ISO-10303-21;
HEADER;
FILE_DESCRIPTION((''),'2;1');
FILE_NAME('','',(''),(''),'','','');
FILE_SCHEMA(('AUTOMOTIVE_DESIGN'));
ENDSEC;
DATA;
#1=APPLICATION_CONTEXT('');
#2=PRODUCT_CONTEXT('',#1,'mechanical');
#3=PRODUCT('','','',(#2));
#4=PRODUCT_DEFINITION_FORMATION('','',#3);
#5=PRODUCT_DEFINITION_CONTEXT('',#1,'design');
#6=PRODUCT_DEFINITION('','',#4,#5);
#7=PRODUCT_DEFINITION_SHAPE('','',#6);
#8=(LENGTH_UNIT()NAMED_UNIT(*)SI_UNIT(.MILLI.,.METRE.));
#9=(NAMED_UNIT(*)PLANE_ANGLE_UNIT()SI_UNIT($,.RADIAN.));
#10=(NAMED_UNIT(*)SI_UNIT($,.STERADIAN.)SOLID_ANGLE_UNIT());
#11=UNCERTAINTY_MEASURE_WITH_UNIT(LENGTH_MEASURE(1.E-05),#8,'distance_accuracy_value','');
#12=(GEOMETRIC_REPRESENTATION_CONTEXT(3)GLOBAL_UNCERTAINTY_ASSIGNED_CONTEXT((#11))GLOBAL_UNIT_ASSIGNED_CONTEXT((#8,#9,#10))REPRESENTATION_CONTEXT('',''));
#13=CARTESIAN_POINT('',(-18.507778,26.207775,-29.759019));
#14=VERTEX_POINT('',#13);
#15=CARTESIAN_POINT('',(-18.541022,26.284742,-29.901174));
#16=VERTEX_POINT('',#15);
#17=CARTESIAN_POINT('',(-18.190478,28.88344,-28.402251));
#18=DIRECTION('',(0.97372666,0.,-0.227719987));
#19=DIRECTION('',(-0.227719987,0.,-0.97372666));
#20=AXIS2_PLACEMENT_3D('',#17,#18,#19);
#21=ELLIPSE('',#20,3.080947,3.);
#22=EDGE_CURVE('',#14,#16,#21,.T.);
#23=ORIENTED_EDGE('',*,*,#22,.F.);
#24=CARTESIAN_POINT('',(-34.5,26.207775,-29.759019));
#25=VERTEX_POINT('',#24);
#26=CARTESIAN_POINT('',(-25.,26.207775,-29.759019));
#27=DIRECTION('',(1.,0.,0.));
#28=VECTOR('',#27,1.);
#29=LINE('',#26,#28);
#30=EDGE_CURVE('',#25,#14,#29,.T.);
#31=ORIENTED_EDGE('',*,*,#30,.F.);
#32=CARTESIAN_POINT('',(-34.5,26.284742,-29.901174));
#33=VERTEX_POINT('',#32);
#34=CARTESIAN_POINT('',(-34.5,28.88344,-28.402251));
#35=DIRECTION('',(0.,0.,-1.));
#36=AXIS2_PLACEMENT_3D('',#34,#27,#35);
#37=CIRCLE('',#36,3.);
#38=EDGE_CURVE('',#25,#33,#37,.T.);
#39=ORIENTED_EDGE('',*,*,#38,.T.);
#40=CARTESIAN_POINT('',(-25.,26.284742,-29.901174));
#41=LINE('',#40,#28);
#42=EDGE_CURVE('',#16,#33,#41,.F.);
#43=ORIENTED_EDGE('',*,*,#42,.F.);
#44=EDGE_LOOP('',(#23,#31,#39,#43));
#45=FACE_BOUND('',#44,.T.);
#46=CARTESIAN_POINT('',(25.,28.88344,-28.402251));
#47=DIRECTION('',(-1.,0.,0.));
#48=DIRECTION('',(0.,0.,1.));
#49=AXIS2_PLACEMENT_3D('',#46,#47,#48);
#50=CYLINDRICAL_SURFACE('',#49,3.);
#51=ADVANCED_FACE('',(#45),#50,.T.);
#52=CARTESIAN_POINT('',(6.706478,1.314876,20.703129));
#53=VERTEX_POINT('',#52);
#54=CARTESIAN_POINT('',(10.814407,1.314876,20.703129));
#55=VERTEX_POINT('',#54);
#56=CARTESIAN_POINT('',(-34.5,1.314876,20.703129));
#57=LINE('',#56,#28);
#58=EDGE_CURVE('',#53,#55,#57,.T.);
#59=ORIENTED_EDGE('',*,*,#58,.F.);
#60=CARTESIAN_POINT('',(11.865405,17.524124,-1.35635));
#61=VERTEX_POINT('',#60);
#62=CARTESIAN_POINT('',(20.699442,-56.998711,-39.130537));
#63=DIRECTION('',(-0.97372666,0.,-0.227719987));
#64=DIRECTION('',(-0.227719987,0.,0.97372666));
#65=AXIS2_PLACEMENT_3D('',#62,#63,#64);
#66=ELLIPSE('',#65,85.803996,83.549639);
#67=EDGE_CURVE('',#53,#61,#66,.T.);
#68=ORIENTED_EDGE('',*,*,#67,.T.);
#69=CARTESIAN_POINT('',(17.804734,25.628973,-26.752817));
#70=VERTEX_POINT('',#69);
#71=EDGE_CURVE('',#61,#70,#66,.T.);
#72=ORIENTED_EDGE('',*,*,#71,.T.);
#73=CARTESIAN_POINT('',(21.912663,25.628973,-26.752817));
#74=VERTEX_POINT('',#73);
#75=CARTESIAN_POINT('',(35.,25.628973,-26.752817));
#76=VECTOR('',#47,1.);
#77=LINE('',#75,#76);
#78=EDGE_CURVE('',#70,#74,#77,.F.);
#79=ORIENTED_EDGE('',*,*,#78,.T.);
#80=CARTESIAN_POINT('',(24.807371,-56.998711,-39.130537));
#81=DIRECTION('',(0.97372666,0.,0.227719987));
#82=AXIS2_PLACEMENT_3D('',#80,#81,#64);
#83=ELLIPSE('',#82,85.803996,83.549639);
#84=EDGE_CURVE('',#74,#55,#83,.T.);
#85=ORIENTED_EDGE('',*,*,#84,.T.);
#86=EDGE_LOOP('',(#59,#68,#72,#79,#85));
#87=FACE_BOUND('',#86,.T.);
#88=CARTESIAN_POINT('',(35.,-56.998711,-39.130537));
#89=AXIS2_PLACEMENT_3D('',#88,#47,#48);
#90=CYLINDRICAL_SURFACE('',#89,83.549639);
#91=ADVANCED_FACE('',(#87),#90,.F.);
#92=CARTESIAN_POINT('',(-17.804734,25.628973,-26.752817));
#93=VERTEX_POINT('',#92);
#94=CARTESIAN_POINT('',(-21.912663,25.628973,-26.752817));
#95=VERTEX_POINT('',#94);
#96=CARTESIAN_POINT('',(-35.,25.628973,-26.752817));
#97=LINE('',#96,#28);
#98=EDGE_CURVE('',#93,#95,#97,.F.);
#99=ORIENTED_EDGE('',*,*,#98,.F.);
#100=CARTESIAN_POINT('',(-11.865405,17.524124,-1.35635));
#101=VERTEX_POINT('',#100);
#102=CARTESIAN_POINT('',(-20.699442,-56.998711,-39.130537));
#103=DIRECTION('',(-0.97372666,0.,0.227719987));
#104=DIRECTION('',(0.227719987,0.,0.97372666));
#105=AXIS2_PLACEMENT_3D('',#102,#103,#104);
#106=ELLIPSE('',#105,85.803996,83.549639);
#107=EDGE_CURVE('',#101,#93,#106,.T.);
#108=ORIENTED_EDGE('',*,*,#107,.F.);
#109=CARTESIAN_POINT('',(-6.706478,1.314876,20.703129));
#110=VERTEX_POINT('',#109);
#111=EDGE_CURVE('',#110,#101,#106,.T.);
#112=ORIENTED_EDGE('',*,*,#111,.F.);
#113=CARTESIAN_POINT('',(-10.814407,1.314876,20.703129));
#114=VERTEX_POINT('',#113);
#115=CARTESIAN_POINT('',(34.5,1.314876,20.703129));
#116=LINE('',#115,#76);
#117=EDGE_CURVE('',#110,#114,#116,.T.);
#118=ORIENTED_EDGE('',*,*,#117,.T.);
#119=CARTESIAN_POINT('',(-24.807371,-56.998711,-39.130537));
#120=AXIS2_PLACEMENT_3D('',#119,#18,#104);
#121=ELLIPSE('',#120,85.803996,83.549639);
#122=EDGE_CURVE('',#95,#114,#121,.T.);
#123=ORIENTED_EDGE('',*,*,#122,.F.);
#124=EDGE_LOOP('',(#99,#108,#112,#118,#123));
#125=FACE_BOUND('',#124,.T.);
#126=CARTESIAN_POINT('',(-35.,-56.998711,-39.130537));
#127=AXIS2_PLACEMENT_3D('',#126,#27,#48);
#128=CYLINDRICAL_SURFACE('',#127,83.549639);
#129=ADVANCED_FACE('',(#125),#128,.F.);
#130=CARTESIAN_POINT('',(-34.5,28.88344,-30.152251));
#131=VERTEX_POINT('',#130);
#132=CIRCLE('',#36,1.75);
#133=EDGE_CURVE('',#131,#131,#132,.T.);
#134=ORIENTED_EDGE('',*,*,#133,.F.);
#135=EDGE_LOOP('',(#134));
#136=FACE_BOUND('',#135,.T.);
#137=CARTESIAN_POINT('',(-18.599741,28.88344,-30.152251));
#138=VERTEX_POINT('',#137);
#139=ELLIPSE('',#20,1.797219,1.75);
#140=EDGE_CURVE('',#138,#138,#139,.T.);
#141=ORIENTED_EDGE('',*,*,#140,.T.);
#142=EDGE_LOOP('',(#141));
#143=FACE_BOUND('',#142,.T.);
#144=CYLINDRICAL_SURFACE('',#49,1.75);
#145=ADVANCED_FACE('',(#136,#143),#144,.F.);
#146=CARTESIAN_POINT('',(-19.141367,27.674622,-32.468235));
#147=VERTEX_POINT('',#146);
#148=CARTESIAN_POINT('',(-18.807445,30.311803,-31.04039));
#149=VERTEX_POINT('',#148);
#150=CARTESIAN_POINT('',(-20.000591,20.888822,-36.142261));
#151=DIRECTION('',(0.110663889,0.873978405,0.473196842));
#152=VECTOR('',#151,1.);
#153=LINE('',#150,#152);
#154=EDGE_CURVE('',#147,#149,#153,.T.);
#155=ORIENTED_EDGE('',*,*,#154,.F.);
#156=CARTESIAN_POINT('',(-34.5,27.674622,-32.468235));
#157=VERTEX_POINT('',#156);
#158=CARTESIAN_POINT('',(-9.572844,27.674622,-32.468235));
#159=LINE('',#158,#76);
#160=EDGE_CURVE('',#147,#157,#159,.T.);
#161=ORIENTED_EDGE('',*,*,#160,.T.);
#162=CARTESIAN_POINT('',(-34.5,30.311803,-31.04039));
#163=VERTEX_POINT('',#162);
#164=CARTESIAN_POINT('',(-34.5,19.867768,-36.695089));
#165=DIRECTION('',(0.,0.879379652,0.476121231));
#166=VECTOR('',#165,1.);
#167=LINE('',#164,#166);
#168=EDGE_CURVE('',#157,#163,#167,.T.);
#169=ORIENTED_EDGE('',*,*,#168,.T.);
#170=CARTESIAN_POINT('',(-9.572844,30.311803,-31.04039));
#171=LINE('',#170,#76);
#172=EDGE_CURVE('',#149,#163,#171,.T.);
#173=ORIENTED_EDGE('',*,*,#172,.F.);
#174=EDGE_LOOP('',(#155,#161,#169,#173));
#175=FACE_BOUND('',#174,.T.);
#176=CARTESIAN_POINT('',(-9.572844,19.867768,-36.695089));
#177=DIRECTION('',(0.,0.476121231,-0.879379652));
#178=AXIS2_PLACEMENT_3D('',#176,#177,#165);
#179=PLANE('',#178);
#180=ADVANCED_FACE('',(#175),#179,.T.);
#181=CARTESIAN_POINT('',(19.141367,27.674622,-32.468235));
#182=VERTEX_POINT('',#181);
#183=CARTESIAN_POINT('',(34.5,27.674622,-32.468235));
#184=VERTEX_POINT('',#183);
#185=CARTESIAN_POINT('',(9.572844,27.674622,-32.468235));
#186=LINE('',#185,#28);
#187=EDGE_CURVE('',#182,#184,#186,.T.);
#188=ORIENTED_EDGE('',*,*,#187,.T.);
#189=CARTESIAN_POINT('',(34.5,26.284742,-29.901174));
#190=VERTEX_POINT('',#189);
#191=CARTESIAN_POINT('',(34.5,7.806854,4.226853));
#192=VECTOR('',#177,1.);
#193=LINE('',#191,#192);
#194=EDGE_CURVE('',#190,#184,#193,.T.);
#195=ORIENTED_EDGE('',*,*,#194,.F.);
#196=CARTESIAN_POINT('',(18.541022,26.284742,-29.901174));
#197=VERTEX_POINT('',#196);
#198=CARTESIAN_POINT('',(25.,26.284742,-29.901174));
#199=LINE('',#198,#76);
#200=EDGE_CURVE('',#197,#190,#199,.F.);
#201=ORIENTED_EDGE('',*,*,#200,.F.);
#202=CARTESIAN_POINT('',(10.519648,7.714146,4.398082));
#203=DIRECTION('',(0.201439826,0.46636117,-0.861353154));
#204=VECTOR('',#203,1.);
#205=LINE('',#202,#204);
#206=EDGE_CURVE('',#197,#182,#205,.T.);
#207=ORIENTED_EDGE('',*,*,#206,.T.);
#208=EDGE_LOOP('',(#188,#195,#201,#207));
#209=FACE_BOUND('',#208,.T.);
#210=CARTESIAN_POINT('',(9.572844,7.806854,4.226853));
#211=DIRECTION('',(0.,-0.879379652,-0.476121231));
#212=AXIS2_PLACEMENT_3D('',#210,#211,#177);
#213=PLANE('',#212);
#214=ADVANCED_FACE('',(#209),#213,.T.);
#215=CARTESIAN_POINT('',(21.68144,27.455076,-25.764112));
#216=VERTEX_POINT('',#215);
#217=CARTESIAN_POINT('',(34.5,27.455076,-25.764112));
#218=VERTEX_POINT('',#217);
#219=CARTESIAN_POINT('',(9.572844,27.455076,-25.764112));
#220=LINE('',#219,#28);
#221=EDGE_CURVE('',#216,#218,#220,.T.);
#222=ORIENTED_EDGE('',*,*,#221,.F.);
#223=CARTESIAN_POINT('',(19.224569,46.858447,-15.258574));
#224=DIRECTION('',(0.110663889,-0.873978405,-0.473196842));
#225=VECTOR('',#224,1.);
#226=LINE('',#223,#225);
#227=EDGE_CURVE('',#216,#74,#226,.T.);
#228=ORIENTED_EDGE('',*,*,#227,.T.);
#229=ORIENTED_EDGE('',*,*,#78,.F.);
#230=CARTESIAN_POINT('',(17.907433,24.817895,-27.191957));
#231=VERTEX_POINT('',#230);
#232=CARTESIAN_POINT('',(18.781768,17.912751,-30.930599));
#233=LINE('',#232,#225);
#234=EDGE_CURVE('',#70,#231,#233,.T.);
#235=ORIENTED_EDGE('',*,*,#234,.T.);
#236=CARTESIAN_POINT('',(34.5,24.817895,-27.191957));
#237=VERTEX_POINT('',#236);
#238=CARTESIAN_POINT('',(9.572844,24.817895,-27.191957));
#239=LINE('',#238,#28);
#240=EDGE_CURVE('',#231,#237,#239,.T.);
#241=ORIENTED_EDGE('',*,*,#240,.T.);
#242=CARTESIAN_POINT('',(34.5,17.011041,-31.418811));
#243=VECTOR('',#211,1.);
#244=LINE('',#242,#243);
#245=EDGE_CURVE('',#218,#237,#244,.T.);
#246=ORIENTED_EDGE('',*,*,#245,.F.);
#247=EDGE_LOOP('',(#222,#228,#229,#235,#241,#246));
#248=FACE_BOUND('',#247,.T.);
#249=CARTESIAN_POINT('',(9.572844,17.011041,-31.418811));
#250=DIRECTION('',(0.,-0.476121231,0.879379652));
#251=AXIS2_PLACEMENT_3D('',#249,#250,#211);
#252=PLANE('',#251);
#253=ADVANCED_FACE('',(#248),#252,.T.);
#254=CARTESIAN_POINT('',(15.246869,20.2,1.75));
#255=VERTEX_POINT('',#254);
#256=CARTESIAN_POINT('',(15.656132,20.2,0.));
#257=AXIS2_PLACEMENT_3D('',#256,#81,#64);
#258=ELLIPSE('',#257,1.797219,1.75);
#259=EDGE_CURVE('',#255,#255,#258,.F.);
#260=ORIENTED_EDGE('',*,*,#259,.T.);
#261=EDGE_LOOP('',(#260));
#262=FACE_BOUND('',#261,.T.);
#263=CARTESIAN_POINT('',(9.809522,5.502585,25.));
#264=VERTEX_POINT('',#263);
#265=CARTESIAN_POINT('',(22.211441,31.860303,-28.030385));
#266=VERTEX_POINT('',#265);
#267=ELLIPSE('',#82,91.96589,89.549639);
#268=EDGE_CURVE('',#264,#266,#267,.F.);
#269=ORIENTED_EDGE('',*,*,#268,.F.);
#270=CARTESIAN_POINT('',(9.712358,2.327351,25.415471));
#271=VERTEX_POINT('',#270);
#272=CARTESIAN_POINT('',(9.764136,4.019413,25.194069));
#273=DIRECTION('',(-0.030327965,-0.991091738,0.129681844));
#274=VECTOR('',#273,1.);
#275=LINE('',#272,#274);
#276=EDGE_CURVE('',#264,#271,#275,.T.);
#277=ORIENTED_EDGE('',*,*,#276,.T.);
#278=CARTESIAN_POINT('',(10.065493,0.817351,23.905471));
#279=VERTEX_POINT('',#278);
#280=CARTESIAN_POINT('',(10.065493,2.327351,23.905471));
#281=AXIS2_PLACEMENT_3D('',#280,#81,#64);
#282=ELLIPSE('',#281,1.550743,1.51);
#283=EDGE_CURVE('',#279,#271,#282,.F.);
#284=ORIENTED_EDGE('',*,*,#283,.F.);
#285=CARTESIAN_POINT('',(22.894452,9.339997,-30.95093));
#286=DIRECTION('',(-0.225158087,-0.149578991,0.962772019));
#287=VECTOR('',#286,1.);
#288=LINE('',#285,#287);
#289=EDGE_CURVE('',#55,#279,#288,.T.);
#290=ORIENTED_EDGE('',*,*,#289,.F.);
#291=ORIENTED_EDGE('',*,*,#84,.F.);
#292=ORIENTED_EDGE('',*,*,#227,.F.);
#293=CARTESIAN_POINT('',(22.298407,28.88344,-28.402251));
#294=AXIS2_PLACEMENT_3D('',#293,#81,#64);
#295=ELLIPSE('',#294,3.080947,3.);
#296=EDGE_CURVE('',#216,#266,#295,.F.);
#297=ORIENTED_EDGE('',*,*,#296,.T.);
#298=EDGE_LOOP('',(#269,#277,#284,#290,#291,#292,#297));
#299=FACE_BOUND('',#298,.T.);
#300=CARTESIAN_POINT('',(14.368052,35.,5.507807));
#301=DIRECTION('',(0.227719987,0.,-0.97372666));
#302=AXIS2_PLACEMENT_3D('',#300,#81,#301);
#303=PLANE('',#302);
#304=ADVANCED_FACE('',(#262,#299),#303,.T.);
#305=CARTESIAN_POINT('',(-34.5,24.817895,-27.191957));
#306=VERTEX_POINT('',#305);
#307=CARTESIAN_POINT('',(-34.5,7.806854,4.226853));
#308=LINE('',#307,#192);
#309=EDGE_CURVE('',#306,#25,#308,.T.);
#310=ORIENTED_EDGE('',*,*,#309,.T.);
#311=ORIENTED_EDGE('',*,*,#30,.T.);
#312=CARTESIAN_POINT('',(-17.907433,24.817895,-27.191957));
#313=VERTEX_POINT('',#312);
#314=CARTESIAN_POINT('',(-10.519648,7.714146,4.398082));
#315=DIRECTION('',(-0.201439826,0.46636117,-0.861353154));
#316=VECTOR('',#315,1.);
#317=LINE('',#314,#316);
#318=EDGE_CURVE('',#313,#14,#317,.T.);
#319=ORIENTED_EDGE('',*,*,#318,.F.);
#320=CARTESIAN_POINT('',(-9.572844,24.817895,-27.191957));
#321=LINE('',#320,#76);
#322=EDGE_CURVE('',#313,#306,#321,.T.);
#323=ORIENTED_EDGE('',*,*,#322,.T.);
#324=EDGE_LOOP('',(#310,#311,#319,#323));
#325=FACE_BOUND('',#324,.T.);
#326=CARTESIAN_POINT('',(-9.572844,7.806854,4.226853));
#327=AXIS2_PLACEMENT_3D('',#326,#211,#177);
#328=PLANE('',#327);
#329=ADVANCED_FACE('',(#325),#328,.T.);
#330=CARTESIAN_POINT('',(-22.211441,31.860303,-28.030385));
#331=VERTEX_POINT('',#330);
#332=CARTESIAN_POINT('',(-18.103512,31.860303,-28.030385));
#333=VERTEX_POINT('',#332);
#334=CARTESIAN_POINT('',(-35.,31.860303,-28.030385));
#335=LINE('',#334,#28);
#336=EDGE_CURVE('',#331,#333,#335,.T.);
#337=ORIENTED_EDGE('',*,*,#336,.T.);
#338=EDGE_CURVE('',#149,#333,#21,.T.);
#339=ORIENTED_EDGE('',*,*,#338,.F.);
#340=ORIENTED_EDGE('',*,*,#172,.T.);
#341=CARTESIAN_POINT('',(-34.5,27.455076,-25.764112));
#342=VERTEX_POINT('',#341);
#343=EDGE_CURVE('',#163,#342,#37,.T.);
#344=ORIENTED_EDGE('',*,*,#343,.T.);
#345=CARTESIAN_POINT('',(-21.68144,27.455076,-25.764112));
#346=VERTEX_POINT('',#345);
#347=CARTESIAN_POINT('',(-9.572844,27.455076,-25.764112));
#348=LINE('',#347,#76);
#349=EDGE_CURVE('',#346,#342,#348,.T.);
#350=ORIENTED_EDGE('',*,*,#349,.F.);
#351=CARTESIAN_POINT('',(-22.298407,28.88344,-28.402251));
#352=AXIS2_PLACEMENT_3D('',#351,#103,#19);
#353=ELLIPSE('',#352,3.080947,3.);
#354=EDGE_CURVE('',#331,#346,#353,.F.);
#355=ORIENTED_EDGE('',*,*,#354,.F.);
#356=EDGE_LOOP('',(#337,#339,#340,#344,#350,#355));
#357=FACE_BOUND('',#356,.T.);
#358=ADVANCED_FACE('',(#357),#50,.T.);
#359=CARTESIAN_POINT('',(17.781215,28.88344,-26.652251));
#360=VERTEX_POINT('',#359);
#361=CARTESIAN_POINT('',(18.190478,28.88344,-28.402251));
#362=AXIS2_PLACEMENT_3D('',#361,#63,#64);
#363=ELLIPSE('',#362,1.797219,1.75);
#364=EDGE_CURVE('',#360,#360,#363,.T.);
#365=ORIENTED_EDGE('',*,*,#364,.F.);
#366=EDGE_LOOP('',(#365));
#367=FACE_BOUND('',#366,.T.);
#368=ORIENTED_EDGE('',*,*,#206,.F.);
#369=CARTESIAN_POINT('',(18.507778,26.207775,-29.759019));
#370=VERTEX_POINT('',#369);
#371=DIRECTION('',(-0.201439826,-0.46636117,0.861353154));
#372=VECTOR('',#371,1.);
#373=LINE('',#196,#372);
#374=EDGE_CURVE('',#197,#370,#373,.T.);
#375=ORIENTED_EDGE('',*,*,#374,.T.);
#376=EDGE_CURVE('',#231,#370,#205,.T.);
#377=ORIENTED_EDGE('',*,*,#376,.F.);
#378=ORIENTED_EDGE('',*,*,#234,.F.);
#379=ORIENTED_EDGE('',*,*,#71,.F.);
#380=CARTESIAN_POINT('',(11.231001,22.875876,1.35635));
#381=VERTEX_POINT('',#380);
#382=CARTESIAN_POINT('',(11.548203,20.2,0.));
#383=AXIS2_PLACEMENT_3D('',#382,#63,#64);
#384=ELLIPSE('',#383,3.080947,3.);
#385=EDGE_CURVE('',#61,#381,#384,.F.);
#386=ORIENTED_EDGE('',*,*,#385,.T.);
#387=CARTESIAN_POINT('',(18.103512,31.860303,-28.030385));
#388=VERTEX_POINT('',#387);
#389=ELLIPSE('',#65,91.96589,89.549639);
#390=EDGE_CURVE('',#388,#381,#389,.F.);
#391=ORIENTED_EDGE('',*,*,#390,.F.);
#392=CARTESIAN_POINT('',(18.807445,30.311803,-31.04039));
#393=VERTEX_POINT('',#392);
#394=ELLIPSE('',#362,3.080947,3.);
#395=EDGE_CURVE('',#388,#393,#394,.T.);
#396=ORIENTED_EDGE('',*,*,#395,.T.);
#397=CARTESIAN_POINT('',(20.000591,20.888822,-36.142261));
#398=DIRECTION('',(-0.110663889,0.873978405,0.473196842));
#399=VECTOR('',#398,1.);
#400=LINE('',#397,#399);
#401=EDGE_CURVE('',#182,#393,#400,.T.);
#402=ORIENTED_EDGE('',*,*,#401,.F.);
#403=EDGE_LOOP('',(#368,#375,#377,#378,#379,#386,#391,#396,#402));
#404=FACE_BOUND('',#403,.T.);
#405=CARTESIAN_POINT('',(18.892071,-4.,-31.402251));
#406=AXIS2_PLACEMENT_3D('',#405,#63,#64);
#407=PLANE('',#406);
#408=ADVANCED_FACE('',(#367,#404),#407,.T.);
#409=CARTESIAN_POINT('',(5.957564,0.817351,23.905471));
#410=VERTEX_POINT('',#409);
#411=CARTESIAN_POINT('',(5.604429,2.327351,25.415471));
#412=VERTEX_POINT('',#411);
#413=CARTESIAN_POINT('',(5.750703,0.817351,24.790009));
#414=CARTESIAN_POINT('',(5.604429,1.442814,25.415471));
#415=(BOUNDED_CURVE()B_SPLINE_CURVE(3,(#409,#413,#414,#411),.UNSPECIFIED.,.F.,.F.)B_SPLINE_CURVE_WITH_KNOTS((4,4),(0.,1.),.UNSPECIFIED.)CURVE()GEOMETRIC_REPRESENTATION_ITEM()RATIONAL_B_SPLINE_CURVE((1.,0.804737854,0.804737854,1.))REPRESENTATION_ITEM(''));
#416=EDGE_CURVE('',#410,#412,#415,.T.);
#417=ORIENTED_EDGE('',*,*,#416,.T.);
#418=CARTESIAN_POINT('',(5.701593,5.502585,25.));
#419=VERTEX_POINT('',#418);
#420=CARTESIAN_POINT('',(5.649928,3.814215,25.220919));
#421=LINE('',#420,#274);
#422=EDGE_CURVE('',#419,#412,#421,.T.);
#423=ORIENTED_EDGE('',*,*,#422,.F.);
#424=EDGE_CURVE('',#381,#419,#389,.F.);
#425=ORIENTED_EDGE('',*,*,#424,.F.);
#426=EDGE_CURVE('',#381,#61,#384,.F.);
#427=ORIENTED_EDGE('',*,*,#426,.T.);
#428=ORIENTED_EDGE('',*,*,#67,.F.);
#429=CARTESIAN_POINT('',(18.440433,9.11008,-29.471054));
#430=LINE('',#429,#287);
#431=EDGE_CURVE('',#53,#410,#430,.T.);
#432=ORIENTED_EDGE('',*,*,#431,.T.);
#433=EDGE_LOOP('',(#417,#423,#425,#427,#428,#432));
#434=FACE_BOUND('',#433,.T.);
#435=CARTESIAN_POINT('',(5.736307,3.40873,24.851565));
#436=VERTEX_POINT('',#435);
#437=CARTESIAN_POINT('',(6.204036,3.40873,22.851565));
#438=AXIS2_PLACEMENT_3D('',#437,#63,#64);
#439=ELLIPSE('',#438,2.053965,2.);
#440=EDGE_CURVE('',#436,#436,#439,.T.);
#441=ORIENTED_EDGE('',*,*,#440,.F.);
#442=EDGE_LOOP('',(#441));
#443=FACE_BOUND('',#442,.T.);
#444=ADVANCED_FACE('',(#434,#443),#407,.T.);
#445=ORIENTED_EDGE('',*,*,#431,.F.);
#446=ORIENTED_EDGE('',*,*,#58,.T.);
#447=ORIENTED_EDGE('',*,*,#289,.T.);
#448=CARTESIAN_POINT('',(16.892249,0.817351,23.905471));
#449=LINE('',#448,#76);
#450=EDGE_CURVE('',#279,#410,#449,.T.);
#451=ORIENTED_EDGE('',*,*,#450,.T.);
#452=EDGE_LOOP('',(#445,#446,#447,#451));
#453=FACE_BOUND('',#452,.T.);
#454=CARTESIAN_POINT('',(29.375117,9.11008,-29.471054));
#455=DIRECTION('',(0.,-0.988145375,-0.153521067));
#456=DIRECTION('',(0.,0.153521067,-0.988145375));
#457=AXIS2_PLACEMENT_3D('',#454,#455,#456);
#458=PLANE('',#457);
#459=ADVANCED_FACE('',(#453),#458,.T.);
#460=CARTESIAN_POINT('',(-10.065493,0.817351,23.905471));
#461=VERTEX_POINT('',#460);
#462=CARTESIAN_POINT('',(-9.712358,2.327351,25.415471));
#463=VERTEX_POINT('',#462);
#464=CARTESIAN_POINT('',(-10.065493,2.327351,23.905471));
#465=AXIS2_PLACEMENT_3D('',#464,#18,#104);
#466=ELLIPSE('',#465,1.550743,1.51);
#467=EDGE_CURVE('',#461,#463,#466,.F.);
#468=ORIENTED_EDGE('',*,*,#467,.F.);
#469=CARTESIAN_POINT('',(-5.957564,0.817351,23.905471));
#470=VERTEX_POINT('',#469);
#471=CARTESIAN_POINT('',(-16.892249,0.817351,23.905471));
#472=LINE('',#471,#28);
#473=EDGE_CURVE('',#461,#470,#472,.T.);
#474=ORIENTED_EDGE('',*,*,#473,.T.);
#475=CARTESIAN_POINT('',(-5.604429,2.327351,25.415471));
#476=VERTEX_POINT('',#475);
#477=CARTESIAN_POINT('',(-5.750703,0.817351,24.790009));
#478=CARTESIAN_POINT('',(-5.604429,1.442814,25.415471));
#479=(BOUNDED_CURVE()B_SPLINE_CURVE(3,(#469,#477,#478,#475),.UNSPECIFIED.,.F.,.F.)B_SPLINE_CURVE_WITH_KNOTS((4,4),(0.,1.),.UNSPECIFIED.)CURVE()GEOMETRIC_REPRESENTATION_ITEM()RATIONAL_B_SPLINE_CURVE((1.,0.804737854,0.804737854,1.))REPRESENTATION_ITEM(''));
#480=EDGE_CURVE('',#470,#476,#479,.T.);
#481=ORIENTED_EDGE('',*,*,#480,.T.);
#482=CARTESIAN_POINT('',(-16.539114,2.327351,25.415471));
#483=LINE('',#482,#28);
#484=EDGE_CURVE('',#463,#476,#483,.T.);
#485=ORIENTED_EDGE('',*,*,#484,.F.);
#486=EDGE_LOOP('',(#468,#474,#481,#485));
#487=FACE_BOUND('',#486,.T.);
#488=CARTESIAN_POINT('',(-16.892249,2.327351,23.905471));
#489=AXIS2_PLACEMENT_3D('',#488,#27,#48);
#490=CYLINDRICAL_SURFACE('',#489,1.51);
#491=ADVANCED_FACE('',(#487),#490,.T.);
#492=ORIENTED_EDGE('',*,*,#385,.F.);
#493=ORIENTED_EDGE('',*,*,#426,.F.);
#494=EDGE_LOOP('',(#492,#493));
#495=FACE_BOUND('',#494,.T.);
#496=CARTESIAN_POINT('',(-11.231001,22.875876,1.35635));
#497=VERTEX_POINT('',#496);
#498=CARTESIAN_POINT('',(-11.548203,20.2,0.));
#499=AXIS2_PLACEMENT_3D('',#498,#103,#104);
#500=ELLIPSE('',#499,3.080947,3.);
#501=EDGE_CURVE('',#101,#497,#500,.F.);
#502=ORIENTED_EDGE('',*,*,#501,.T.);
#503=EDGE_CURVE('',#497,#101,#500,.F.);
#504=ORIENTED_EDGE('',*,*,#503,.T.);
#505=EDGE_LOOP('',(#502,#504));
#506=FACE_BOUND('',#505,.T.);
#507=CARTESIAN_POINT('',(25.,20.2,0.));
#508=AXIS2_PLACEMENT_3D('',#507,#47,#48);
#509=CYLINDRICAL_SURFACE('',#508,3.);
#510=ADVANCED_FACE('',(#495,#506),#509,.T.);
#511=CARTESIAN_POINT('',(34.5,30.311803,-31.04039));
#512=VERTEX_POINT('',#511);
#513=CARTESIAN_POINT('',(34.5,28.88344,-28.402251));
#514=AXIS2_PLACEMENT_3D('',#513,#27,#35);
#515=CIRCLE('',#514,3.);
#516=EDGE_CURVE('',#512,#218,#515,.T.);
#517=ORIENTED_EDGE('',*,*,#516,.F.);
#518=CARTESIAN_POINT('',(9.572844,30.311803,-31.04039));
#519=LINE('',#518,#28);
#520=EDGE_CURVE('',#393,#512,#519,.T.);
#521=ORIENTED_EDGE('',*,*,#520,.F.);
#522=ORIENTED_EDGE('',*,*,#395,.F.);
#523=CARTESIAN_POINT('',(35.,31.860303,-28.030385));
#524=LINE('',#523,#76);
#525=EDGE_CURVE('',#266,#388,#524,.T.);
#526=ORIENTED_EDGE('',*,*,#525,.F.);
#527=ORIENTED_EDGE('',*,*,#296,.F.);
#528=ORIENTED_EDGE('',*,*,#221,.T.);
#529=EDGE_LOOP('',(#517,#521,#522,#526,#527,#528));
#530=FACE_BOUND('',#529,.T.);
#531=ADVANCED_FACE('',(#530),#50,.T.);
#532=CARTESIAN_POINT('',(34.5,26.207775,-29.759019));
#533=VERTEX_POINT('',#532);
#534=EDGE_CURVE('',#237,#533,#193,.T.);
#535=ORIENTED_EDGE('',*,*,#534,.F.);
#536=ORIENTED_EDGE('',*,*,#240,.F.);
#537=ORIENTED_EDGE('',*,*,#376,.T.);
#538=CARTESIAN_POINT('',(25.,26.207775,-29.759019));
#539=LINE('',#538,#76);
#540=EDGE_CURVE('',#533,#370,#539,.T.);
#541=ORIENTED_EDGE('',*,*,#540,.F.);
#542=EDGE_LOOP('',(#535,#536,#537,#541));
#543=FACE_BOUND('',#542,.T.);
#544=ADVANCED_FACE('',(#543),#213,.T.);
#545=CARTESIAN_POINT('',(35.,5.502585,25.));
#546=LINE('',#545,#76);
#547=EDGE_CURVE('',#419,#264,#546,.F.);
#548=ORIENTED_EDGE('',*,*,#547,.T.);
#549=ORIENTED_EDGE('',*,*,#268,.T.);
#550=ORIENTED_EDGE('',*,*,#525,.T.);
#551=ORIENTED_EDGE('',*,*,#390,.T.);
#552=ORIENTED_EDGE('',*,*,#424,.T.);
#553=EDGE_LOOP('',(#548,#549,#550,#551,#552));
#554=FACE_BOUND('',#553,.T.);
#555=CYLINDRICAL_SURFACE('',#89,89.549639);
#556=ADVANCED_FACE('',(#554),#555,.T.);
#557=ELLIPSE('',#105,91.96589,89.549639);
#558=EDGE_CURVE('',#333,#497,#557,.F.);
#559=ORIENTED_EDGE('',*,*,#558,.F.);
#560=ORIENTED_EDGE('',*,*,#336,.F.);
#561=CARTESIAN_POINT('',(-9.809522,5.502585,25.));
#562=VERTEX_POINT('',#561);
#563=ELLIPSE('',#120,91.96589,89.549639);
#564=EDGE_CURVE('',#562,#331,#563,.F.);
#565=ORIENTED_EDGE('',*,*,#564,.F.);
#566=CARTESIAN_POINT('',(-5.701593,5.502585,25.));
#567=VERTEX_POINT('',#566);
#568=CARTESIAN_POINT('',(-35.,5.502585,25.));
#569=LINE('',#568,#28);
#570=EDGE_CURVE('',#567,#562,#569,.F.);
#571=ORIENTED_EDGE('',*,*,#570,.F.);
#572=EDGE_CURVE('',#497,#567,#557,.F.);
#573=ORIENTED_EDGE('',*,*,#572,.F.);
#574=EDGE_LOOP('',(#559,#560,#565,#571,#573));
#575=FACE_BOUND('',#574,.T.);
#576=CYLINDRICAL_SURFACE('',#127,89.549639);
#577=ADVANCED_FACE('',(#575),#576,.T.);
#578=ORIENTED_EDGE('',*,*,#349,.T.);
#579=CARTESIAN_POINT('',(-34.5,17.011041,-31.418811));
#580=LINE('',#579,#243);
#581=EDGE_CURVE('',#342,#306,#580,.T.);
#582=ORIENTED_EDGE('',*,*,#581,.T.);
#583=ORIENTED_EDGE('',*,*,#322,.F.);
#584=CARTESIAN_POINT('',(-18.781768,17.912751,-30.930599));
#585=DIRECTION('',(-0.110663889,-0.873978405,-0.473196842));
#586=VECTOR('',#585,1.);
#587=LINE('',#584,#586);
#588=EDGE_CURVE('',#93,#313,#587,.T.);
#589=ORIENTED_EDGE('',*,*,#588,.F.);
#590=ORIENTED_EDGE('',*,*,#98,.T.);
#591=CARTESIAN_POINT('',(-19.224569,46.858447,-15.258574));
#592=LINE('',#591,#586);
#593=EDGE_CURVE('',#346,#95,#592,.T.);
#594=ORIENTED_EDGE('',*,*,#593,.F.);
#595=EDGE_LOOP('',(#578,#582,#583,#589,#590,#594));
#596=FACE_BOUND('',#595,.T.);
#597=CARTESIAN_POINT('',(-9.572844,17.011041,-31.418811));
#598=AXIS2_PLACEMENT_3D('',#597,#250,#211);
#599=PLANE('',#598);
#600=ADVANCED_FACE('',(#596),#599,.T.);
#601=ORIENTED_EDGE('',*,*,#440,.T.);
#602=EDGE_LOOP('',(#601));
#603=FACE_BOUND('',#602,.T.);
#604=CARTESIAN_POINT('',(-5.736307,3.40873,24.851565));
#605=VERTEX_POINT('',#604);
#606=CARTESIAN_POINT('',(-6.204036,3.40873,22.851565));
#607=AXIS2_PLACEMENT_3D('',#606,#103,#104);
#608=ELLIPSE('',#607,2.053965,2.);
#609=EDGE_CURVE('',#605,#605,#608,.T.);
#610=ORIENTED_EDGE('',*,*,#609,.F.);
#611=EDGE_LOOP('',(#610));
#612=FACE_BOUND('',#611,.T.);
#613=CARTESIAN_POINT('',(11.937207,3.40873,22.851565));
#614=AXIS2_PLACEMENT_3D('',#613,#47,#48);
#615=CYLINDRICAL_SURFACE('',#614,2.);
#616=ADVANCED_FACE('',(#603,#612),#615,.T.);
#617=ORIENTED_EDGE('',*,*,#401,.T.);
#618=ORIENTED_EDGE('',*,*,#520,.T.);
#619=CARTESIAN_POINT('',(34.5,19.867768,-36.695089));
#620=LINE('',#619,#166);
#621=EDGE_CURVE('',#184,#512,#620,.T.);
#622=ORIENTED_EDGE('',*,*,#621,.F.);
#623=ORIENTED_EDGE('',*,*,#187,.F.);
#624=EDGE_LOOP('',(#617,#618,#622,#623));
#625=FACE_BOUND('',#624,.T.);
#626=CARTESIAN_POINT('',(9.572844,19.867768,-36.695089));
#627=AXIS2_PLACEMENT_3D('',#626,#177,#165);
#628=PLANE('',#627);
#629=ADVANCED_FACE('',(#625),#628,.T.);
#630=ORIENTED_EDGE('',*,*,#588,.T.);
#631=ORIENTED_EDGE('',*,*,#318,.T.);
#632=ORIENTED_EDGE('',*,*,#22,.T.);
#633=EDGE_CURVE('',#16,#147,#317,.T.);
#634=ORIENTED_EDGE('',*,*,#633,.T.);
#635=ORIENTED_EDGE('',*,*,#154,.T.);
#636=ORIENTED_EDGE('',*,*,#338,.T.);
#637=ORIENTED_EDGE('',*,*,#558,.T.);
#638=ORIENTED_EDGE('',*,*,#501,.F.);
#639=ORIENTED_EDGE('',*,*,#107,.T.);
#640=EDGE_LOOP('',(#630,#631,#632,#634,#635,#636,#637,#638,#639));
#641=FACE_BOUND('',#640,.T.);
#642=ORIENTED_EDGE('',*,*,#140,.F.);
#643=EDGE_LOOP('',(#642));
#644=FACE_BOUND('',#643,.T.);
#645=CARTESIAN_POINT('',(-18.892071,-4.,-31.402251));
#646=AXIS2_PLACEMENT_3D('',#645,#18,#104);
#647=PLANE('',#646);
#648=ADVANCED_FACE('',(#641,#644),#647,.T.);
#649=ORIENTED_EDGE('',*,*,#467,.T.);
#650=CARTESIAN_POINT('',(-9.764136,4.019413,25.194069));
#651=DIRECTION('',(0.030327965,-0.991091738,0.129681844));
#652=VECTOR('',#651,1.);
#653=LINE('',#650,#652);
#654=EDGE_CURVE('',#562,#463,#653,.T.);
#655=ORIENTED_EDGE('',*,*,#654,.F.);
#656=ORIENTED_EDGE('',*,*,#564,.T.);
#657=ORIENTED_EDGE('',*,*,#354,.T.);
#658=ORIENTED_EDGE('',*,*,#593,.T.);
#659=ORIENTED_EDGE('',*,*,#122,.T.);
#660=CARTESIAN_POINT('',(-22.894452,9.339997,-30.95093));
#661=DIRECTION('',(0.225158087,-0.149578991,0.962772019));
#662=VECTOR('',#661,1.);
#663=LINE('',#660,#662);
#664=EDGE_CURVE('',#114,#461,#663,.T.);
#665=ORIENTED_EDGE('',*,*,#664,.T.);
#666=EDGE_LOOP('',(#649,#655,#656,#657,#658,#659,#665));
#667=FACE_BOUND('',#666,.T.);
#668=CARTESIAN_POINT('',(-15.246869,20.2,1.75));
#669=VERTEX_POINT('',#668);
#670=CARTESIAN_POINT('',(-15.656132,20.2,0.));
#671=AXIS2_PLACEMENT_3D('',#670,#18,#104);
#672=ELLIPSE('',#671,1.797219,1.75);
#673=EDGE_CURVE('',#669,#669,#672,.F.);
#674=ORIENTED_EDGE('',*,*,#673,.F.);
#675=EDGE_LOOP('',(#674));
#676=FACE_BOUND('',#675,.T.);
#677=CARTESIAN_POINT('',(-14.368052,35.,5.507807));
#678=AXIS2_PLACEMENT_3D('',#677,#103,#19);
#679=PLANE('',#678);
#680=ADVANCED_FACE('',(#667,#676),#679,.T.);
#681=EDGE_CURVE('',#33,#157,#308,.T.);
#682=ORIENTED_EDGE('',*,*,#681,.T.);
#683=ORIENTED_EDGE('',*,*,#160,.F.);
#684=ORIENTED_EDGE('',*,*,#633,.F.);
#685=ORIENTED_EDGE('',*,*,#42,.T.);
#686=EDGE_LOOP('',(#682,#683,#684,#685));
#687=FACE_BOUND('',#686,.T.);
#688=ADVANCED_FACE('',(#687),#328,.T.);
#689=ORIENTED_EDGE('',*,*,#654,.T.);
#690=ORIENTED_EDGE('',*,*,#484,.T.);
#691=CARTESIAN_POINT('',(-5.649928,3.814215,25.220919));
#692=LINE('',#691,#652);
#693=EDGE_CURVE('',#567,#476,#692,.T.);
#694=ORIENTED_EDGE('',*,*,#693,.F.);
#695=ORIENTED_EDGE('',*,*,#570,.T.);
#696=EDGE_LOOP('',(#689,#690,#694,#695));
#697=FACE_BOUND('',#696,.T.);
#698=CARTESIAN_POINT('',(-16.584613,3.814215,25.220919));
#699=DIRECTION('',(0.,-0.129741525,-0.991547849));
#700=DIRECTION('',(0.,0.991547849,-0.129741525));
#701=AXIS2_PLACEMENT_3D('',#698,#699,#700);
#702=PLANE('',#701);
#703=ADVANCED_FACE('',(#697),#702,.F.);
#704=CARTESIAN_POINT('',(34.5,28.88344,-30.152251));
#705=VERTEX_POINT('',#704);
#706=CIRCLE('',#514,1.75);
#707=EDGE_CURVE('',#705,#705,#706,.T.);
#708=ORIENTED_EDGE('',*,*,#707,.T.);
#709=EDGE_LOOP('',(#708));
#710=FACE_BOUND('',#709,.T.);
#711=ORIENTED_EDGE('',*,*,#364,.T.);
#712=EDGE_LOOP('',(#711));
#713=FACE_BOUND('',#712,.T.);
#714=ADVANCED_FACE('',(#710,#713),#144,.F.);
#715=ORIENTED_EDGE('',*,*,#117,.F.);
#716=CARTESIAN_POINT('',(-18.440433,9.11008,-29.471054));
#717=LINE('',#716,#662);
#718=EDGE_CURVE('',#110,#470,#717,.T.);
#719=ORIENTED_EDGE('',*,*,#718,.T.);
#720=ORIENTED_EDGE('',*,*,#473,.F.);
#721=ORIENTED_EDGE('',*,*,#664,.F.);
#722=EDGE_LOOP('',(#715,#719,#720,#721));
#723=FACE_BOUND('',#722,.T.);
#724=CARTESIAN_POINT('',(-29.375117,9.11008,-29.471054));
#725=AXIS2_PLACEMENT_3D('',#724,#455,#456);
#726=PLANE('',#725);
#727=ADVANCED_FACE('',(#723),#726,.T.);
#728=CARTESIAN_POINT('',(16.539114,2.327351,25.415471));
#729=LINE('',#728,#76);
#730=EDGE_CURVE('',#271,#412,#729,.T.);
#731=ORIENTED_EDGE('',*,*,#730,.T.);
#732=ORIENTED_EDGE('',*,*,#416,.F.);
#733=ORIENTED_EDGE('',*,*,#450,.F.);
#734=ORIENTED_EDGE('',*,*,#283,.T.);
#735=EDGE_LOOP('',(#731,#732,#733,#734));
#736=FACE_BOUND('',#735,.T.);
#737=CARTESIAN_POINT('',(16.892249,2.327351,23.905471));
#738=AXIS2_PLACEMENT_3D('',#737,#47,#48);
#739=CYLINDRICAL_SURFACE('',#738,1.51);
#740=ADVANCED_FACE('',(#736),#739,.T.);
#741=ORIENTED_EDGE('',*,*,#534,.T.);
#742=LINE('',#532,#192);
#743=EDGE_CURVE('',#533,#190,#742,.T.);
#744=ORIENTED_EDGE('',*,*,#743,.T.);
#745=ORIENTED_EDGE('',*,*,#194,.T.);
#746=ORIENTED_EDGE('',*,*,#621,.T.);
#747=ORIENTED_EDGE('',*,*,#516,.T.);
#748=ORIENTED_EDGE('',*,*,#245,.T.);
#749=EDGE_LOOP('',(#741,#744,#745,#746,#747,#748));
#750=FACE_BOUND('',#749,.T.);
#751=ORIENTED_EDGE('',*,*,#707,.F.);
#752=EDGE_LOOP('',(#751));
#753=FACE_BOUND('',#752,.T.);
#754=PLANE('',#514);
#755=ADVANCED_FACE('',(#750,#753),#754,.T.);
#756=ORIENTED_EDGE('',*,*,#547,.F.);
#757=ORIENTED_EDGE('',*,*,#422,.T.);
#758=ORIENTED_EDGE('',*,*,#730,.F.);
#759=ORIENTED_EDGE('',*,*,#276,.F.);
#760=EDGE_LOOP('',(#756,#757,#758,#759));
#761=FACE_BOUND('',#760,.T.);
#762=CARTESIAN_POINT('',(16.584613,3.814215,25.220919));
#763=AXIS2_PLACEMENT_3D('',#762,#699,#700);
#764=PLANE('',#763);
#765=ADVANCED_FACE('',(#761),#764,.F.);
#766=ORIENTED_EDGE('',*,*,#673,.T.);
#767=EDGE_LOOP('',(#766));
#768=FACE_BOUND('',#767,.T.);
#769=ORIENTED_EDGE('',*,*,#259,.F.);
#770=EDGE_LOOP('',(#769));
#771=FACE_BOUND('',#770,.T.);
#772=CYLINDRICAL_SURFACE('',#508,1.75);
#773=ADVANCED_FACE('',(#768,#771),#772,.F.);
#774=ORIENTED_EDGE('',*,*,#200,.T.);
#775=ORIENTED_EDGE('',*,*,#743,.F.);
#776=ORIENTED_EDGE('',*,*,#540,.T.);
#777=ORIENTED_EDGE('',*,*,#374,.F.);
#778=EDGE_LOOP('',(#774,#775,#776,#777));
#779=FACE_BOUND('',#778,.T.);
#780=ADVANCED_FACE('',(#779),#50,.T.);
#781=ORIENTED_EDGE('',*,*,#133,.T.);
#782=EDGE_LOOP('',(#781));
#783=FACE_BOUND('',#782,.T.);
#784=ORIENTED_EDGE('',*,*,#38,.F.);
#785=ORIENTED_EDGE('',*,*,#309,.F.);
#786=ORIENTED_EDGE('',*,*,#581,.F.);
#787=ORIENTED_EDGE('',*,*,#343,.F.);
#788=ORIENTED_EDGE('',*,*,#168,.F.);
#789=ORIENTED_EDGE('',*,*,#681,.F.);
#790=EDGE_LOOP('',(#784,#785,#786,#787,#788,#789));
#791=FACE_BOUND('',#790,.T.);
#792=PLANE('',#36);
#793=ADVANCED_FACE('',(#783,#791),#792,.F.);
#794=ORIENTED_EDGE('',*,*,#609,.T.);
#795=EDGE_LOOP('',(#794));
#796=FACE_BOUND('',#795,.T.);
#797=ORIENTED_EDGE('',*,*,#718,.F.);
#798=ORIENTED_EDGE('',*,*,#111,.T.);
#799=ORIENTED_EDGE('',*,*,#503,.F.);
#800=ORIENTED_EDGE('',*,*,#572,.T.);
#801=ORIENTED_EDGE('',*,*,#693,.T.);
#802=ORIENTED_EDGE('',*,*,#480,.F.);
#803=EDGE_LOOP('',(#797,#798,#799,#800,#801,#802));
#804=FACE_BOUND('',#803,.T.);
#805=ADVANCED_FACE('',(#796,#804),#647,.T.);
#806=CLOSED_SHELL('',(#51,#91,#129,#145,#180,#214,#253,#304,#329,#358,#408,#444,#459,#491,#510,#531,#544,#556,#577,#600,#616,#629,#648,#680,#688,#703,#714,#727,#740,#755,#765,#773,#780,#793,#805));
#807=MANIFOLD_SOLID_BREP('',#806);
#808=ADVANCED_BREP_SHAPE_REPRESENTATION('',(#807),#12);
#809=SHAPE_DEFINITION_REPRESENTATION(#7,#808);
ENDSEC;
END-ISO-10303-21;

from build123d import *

# Parameters (mm, degrees)
CROQUIS3_R                        = 3
CROQUIS3_R_2                      = 1.75
SALIENTE_EXTRUIR1_DEPTH           = 25
SALIENTE_EXTRUIR1_2_DEPTH         = 25
SALIENTE_EXTRUIR2_DEPTH           = 5
CROQUIS6_R                        = 3
SALIENTE_EXTRUIR3_DEPTH           = 10
CROQUIS7_R                        = 1.75
CORTAR_EXTRUIR1_DEPTH             = 10
SALIENTE_EXTRUIR4_DEPTH           = 35
SALIENTE_EXTRUIR4_DEPTH_BACK      = 4
CORTAR_EXTRUIR2_DEPTH             = 35
CORTAR_EXTRUIR3_DEPTH             = 35
CROQUIS11_R                       = 1.75
CORTAR_EXTRUIR4_DEPTH             = 75.850885973
CHAFL_N1_SIZE                     = 2
REDONDEO2_START                   = -5.0000001
REDONDEO2_DEPTH                   = 10.0000002
CROQUIS15_R                       = 3
CROQUIS15_R_2                     = 1.75
SALIENTE_EXTRUIR7_DEPTH           = 34.5
CORTAR_EXTRUIR6_DEPTH             = 75.850885889
CROQUIS17_W                       = 58.035388513
CROQUIS17_H                       = 46.523798752
CORTAR_EXTRUIR7_DEPTH             = 89.512139195
CROQUIS18_W                       = 44.423903472
CROQUIS18_H                       = 36.103655843
CORTAR_EXTRUIR8_DEPTH             = 69.319773447
CORTAR_EXTRUIR9_REACH             = 58.506
CROQUIS19_W                       = 12.504575714
CROQUIS19_H                       = 15.8167713
CORTAR_EXTRUIR9_DIRECTION_2_REACH = 58.506
CORTAR_EXTRUIR10_DEPTH            = 57.505797104
CORTAR_EXTRUIR10_DEPTH_BACK       = 57.505797104
SALIENTE_EXTRUIR8_START           = 5.604429129
SALIENTE_EXTRUIR8_DEPTH           = 5.209978082
SALIENTE_EXTRUIR8_START_2         = 9
SALIENTE_EXTRUIR8_2_OUTLINE_W     = 8
SALIENTE_EXTRUIR8_2_OUTLINE_H     = 9
SALIENTE_EXTRUIR8_2_DEPTH         = 2.244792929
SALIENTE_EXTRUIR8_START_3         = 15.244792929
SALIENTE_EXTRUIR8_3_OUTLINE_W     = 8
SALIENTE_EXTRUIR8_3_OUTLINE_H     = 9
SALIENTE_EXTRUIR8_3_DEPTH         = 1.755207071
SALIENTE_EXTRUIR9_REACH           = 58.506
CROQUIS27_R                       = 2
SALIENTE_EXTRUIR10_REACH          = 84.241


with BuildPart() as part:
    # Croquis3 → Saliente-Extruir1 (new body)
    with BuildSketch(Plane(origin=(0, 0, 0), x_dir=(0, 0, -1), z_dir=(1, 0, 0))):
        with Locations((0, 20.2)):
            Circle(CROQUIS3_R)
        with Locations((0, 20.2)):
            Circle(CROQUIS3_R_2, mode=Mode.SUBTRACT)
    extrude(amount=SALIENTE_EXTRUIR1_DEPTH)


with BuildPart() as body_2:
    # Croquis3 → Saliente-Extruir1 2 (new body)
    with BuildSketch(Plane(origin=(0, 0, 0), x_dir=(0, 0, -1), z_dir=(1, 0, 0))):
        with Locations((28.402251252, 28.88343963)):
            Circle(CROQUIS3_R)
        with Locations((28.402251252, 28.88343963)):
            Circle(CROQUIS3_R_2, mode=Mode.SUBTRACT)
    extrude(amount=SALIENTE_EXTRUIR1_2_DEPTH)


with BuildPart() as body_3:
    # Croquis5 → Saliente-Extruir2 (new, symmetric)
    with BuildSketch(Plane(origin=(0, 0, 0), x_dir=(1, 0, 0), z_dir=(0, 1, 0))):
        with BuildLine():
            Line((0, -26), (0, -30))
            add(Edge.make_bspline(
                [(0, -30), (3.306526268, -30), (16.53263134, -29.831217065), (35.997648536, -28.565345051), (52.057120801, -26.333176426), (58.766277483, -25.109762555), (60, -24.873829164)],
                knots=[4.71238898, 4.71238898, 4.71238898, 4.71238898, 4.810563751, 5.105088062, 5.301437603, 5.346535107, 5.346535107, 5.346535107, 5.346535107], degree=3))
            Line((60, -24.873829164), (60, -20.8))
            add(Edge.make_bspline(
                [(0, -26), (33.333333333, -26), (60, -20.8)],
                knots=[4.71238898, 4.71238898, 4.71238898, 5.355890089, 5.355890089, 5.355890089], degree=2, weights=[1, 0.948683298, 1]))
        make_face()
    extrude(amount=SALIENTE_EXTRUIR2_DEPTH, both=True)

    # Croquis6 → Saliente-Extruir3 (add)
    with BuildSketch(Plane.XY.offset(26)):
        with Locations((38, 0)):
            Circle(CROQUIS6_R)
    extrude(amount=-SALIENTE_EXTRUIR3_DEPTH)

    # Croquis7 → Cortar-Extruir1 (cut)
    with BuildSketch(Plane(origin=(0, 0, 16), x_dir=(-1, 0, 0), z_dir=(0, 0, -1))):
        with Locations((-38, 0)):
            Circle(CROQUIS7_R)
    extrude(amount=-CORTAR_EXTRUIR1_DEPTH, mode=Mode.SUBTRACT)


with BuildPart() as body_4:
    # Croquis8 → Saliente-Extruir4 (new, two sides: drawn at the far end of the back side and taken through both)
    with BuildSketch(Plane(origin=(0, 0, 0), x_dir=(1, 0, 0), z_dir=(0, 1, 0)).offset(-SALIENTE_EXTRUIR4_DEPTH_BACK)):
        Polygon((18.892070983, 31.402251252), (5, -28), (9.107929017, -28), (23, 31.402251252), align=None)
    extrude(amount=SALIENTE_EXTRUIR4_DEPTH + SALIENTE_EXTRUIR4_DEPTH_BACK)

    # Croquis9 → Cortar-Extruir2 (cut)
    with BuildSketch(Plane(origin=(0, 0, 0), x_dir=(0, 0, -1), z_dir=(1, 0, 0))):
        with BuildLine():
            ThreePointArc((23.072173604, 71.551815183), (-21.61922461, 57.42408075), (-58.358460899, 28.318368742))
            ThreePointArc((-58.358460899, 28.318368742), (-54.318368742, -32.358460899), (6.358460899, -28.318368742))
            ThreePointArc((6.358460899, -28.318368742), (18.708788399, -18.534140443), (33.7323289, -13.784935922))
            ThreePointArc((33.7323289, -13.784935922), (71.070626804, 34.213517278), (23.072173604, 71.551815183))
        make_face()
        with BuildLine():
            ThreePointArc((28.03038537, 31.860303041), (-2.862009257, 22.094675544), (-28.257567039, 1.975700145))
            ThreePointArc((-28.257567039, 1.975700145), (-27.975700145, -2.257567039), (-23.742432961, -1.975700145))
            ThreePointArc((-23.742432961, -1.975700145), (-0.048426954, 16.795264763), (28.774117135, 25.90657622))
            ThreePointArc((28.774117135, 25.90657622), (31.379114663, 29.255305513), (28.03038537, 31.860303041))
        make_face(mode=Mode.SUBTRACT)
    extrude(amount=CORTAR_EXTRUIR2_DEPTH, mode=Mode.SUBTRACT)


with BuildPart() as cortar_extruir3_tool:
    # Croquis10 → Cortar-Extruir3 (new body)
    with BuildSketch(Plane(origin=(0, 0, 0), x_dir=(1, 0, 0), z_dir=(0, 1, 0))):
        Polygon((14.368051869, -5.50780718), (23.738120218, 34.558440326), (28.571984955, 34.558440326), (28.571984955, -5.50780718), align=None)
    extrude(amount=CORTAR_EXTRUIR3_DEPTH)


with BuildPart() as part_1:
    add(part.part)

    # Cortar-Extruir3: cut by cortar_extruir3_tool
    add(cortar_extruir3_tool.part, mode=Mode.SUBTRACT)


with BuildPart() as body_2_1:
    add(body_2.part)

    # Cortar-Extruir3: cut by cortar_extruir3_tool
    add(cortar_extruir3_tool.part, mode=Mode.SUBTRACT)

    # Combinar1: union body 4, part, body 3
    add(body_4.part)
    add(part_1.part)
    add(body_3.part)

    # Croquis11 → Cortar-Extruir4 (cut, through all)
    with BuildSketch(Plane(origin=(0, 0, 0), x_dir=(0, 0, -1), z_dir=(1, 0, 0))):
        with Locations(Location((28.402251252, 28.88343963, 0), (0, 0, 180))):
            Circle(CROQUIS11_R)
        with Locations(Location((0, 20.2, 0), (0, 0, 180))):
            Circle(CROQUIS11_R)
    extrude(amount=CORTAR_EXTRUIR4_DEPTH, mode=Mode.SUBTRACT)

    # Chaflán1
    chafl_n1_edges = [body_2_1.edges().sort_by_distance(p)[0] for p in [
        (60, -5, 22.836914582),
        (60, 5, 22.836914582),
        (30.12007931, -5, 28.805559056),
        (30.12007931, 5, 28.805559056),
    ]]
    chamfer(chafl_n1_edges, length=CHAFL_N1_SIZE)

    # Redondeo2: read off the stored shape, not the designer's step
    # Redondeo2 outline → Redondeo2 (cut)
    with BuildSketch(Plane(origin=(0, 0, 0), x_dir=(1, 0, 0), z_dir=(0, 1, 0)).offset(REDONDEO2_START)):
        with BuildLine():
            Line((60, -24.873829164), (60, -22.378802425))
            ThreePointArc((60, -22.378802425), (59.301153244, -24.303560526), (57.530204169, -25.331577991))
            add(Edge.make_bspline(
                [(57.530204169, -25.331577991), (58.36173126, -25.182267919), (59.185100773, -25.029668046), (60, -24.873829164)],
                knots=[5.316747273, 5.316747273, 5.316747273, 5.316747273, 5.346535107, 5.346535107, 5.346535107, 5.346535107], degree=3))
        make_face()
    extrude(amount=REDONDEO2_DEPTH, mode=Mode.SUBTRACT)

    # Simetría1: body 2 across plane


with BuildPart() as body_2_2:
    add(body_2_1.part)
    add(body_2_1.part.mirror(Plane(origin=(0, 0, 0), x_dir=(0, 0, 1), z_dir=(1, 0, 0))))

    # Croquis15 → Saliente-Extruir7 (add, symmetric)
    with BuildSketch(Plane(origin=(0, 0, 0), x_dir=(0, 0, -1), z_dir=(1, 0, 0))):
        with Locations((28.402251252, 28.88343963)):
            Circle(CROQUIS15_R)
        with Locations((28.402251252, 28.88343963)):
            Circle(CROQUIS15_R_2, mode=Mode.SUBTRACT)
    extrude(amount=SALIENTE_EXTRUIR7_DEPTH, both=True)

    # Croquis16 → Cortar-Extruir6 (cut, through all)
    with BuildSketch(Plane(origin=(0, 0, 0), x_dir=(1, 0, 0), z_dir=(0, 1, 0))):
        Polygon((-16.885477313, 22.822092006), (-19.378773918, 33.483384445), (19.378773918, 33.483384445), (16.885477313, 22.822092006), align=None)
    extrude(amount=CORTAR_EXTRUIR6_DEPTH, mode=Mode.SUBTRACT)

    # Croquis17 → Cortar-Extruir7 (cut, through all)
    with BuildSketch(Plane(origin=(14.844261295, 0, 3.471544045), x_dir=(0.2277199868274214, 0, -0.9737266595915505), z_dir=(0.9737266595915505, 0, 0.2277199868274214))):
        with Locations((-19.202717709, -6.205565874)):
            Rectangle(CROQUIS17_W, CROQUIS17_H)
    extrude(amount=CORTAR_EXTRUIR7_DEPTH, mode=Mode.SUBTRACT)

    # Croquis18 → Cortar-Extruir8 (cut, through all)
    with BuildSketch(Plane(origin=(-14.844261295, 0, 3.471544045), x_dir=(0.2277199868274214, 0, 0.9737266595915505), z_dir=(-0.9737266595915505, 0, 0.2277199868274214))):
        with Locations((24.508189539, -3.279068715)):
            Rectangle(CROQUIS18_W, CROQUIS18_H)
    extrude(amount=CORTAR_EXTRUIR8_DEPTH, mode=Mode.SUBTRACT)

    # Croquis19 → Cortar-Extruir9 (cut, up to next)
    with BuildSketch(Plane(origin=(0, 0, 0), x_dir=(0, 0, -1), z_dir=(1, 0, 0)), mode=Mode.PRIVATE) as cortar_extruir9_sk1:
        with Locations((-31.252287857, 0.477900731)):
            Rectangle(CROQUIS19_W, CROQUIS19_H)
    cortar_extruir9_tool1 = extrude(cortar_extruir9_sk1.sketch, amount=-CORTAR_EXTRUIR9_REACH, mode=Mode.PRIVATE) & body_2_2.part
    add(cortar_extruir9_tool1.solids().sort_by_distance((0, 0.477901, 31.252288))[0], mode=Mode.SUBTRACT)

    # Croquis19 → Cortar-Extruir9 direction 2 (cut, up to next)
    with BuildSketch(Plane(origin=(0, 0, 0), x_dir=(0, 0, -1), z_dir=(1, 0, 0)), mode=Mode.PRIVATE) as cortar_extruir9_direction_2_sk1:
        with Locations((-31.252287857, 0.477900731)):
            Rectangle(CROQUIS19_W, CROQUIS19_H)
    cortar_extruir9_direction_2_tool1 = extrude(cortar_extruir9_direction_2_sk1.sketch, amount=CORTAR_EXTRUIR9_DIRECTION_2_REACH, mode=Mode.PRIVATE) & body_2_2.part
    add(cortar_extruir9_direction_2_tool1.solids().sort_by_distance((0, 0.477901, 31.252288))[0], mode=Mode.SUBTRACT)

    # Croquis22 → Cortar-Extruir10 (cut, two sides: drawn at the far end of the back side and taken through both)
    with BuildSketch(Plane(origin=(0, 0, 0), x_dir=(0, 0, -1), z_dir=(1, 0, 0)).offset(-CORTAR_EXTRUIR10_DEPTH_BACK)):
        Polygon((-25, 5.502584664), (-20.70312925, 1.31487625), (-20.70312925, -4.672126299), (-25.020021016, -4.672126299), align=None)
    extrude(amount=CORTAR_EXTRUIR10_DEPTH + CORTAR_EXTRUIR10_DEPTH_BACK, mode=Mode.SUBTRACT)

    # Saliente-Extruir8: read off the stored shape, not the designer's step
    # Saliente-Extruir8 outline → Saliente-Extruir8 (add)
    with BuildSketch(Plane(origin=(0, 0, 0), x_dir=(0, 0, -1), z_dir=(1, 0, 0)).offset(SALIENTE_EXTRUIR8_START)):
        with BuildLine():
            ThreePointArc((-25.415471242, 2.327351318), (-24.973202481, 1.259620078), (-23.905471242, 0.817351318))
            Line((-23.905471242, 0.817351318), (-20.70312925, 1.31487625))
            Line((-20.70312925, 1.31487625), (-25, 5.502584664))
            Line((-25, 5.502584664), (-25.415471242, 2.327351318))
        make_face()
    extrude(amount=SALIENTE_EXTRUIR8_DEPTH)

    # Saliente-Extruir8 2 outline → Saliente-Extruir8 2 (cut)
    with BuildSketch(Plane(origin=(0, 0, 0), x_dir=(0, 1, 0), z_dir=(0.9737266595915505, 0, 0.22771998682742112)).offset(SALIENTE_EXTRUIR8_START_2)):
        with Locations((3, 20.5)):
            Rectangle(SALIENTE_EXTRUIR8_2_OUTLINE_W, SALIENTE_EXTRUIR8_2_OUTLINE_H)
    extrude(amount=SALIENTE_EXTRUIR8_2_DEPTH, mode=Mode.SUBTRACT)

    # Saliente-Extruir8 3 outline → Saliente-Extruir8 3 (cut)
    with BuildSketch(Plane(origin=(0, 0, 0), x_dir=(0, 1, 0), z_dir=(0.9737266595915505, 0, 0.22771998682742112)).offset(SALIENTE_EXTRUIR8_START_3)):
        with Locations((3, 20.5)):
            Rectangle(SALIENTE_EXTRUIR8_3_OUTLINE_W, SALIENTE_EXTRUIR8_3_OUTLINE_H)
    extrude(amount=SALIENTE_EXTRUIR8_3_DEPTH, mode=Mode.SUBTRACT)

    # Saliente-Extruir9: up to this plane
    saliente_extruir9_end = Plane(origin=(18.892070983, -4, -31.402251252), z_dir=(-0.9737266595915502, 0, -0.22771998682742178))
    # Croquis27 → Saliente-Extruir9 (add, up to the surface)
    with BuildSketch(Plane(origin=(0, 0, 0), x_dir=(0, 0, -1), z_dir=(1, 0, 0)), mode=Mode.PRIVATE) as saliente_extruir9_sk1:
        with Locations(Location((-22.851564625, 3.408730457, 0), (0, 0, 180))):
            Circle(CROQUIS27_R)
    saliente_extruir9_tool1 = split(extrude(saliente_extruir9_sk1.sketch, amount=SALIENTE_EXTRUIR9_REACH, mode=Mode.PRIVATE), bisect_by=saliente_extruir9_end, keep=Keep.BOTH, mode=Mode.PRIVATE)
    add(saliente_extruir9_tool1.solids().sort_by_distance((0, 3.40873, 22.851565))[0])

    # Simetría2: body 2 across plane


with BuildPart() as body_2_3:
    add(body_2_2.part)
    add(body_2_2.part.mirror(Plane(origin=(0, 0, 0), x_dir=(0, 0, 1), z_dir=(1, 0, 0))))

    # Saliente-Extruir10: up to this plane
    saliente_extruir10_end = Plane(origin=(18.892070983, -4, -31.402251252), z_dir=(-0.9737266595915502, 0, -0.22771998682742178))
    # Croquis28 → Saliente-Extruir10 (add, up to the surface)
    with BuildSketch(Plane(origin=(34.5, 0, 0), x_dir=(0, 0, -1), z_dir=(1, 0, 0)), mode=Mode.PRIVATE) as saliente_extruir10_sk1:
        with BuildLine():
            ThreePointArc((27.066737846, 26.197103102), (26.31824017, 26.725454966), (25.764112295, 27.455075937))
            Line((25.764112295, 27.455075937), (27.191957483, 24.81789464))
            Line((27.191957483, 24.81789464), (29.759019258, 26.207775119))
            ThreePointArc((29.759019258, 26.207775119), (28.41414295, 25.883463199), (27.066737846, 26.197103102))
        make_face()
    saliente_extruir10_tool1 = split(extrude(saliente_extruir10_sk1.sketch, amount=-SALIENTE_EXTRUIR10_REACH, mode=Mode.PRIVATE), bisect_by=saliente_extruir10_end, keep=Keep.BOTH, mode=Mode.PRIVATE)
    add(saliente_extruir10_tool1.solids().sort_by_distance((34.5, 25.725607, -27.460996))[0])
    # Croquis28 → Saliente-Extruir10 (add, up to the surface)
    with BuildSketch(Plane(origin=(34.5, 0, 0), x_dir=(0, 0, -1), z_dir=(1, 0, 0)), mode=Mode.PRIVATE) as saliente_extruir10_sk2:
        with BuildLine():
            Line((28.972595635, 27.22898888), (27.066737846, 26.197103102))
            ThreePointArc((27.066737846, 26.197103102), (28.41414295, 25.883463199), (29.759019258, 26.207775119))
            Line((29.759019258, 26.207775119), (29.901173624, 26.284741548))
            ThreePointArc((29.901173624, 26.284741548), (30.907879247, 27.233643172), (31.381757368, 28.533377772))
            Line((31.381757368, 28.533377772), (29.475899579, 27.501491994))
            ThreePointArc((29.475899579, 27.501491994), (29.235463407, 27.344525238), (28.972595635, 27.22898888))
        make_face()
    saliente_extruir10_tool2 = split(extrude(saliente_extruir10_sk2.sketch, amount=-SALIENTE_EXTRUIR10_REACH, mode=Mode.PRIVATE), bisect_by=saliente_extruir10_end, keep=Keep.BOTH, mode=Mode.PRIVATE)
    add(saliente_extruir10_tool2.solids().sort_by_distance((34.5, 26.907055, -29.472322))[0])
    # Croquis28 → Saliente-Extruir10 (add, up to the surface)
    with BuildSketch(Plane(origin=(34.5, 0, 0), x_dir=(0, 0, -1), z_dir=(1, 0, 0)), mode=Mode.PRIVATE) as saliente_extruir10_sk3:
        with BuildLine():
            Line((32.468235398, 27.674622027), (31.04039021, 30.311803324))
            ThreePointArc((31.04039021, 30.311803324), (31.310379247, 29.620183523), (31.402251252, 28.88343963))
            ThreePointArc((31.402251252, 28.88343963), (31.397123399, 28.708109011), (31.381757368, 28.533377772))
            ThreePointArc((31.381757368, 28.533377772), (30.907879247, 27.233643172), (29.901173624, 26.284741548))
            Line((29.901173624, 26.284741548), (32.468235398, 27.674622027))
        make_face()
    saliente_extruir10_tool3 = split(extrude(saliente_extruir10_sk3.sketch, amount=-SALIENTE_EXTRUIR10_REACH, mode=Mode.PRIVATE), bisect_by=saliente_extruir10_end, keep=Keep.BOTH, mode=Mode.PRIVATE)
    add(saliente_extruir10_tool3.solids().sort_by_distance((34.5, 27.945505, -31.561072))[0])

    # Simetría3: body 2 across plane


with BuildPart() as body_2_4:
    add(body_2_3.part)
    add(body_2_3.part.mirror(Plane(origin=(0, 0, 0), x_dir=(0, 0, 1), z_dir=(1, 0, 0))))


solid = body_2_4.part
